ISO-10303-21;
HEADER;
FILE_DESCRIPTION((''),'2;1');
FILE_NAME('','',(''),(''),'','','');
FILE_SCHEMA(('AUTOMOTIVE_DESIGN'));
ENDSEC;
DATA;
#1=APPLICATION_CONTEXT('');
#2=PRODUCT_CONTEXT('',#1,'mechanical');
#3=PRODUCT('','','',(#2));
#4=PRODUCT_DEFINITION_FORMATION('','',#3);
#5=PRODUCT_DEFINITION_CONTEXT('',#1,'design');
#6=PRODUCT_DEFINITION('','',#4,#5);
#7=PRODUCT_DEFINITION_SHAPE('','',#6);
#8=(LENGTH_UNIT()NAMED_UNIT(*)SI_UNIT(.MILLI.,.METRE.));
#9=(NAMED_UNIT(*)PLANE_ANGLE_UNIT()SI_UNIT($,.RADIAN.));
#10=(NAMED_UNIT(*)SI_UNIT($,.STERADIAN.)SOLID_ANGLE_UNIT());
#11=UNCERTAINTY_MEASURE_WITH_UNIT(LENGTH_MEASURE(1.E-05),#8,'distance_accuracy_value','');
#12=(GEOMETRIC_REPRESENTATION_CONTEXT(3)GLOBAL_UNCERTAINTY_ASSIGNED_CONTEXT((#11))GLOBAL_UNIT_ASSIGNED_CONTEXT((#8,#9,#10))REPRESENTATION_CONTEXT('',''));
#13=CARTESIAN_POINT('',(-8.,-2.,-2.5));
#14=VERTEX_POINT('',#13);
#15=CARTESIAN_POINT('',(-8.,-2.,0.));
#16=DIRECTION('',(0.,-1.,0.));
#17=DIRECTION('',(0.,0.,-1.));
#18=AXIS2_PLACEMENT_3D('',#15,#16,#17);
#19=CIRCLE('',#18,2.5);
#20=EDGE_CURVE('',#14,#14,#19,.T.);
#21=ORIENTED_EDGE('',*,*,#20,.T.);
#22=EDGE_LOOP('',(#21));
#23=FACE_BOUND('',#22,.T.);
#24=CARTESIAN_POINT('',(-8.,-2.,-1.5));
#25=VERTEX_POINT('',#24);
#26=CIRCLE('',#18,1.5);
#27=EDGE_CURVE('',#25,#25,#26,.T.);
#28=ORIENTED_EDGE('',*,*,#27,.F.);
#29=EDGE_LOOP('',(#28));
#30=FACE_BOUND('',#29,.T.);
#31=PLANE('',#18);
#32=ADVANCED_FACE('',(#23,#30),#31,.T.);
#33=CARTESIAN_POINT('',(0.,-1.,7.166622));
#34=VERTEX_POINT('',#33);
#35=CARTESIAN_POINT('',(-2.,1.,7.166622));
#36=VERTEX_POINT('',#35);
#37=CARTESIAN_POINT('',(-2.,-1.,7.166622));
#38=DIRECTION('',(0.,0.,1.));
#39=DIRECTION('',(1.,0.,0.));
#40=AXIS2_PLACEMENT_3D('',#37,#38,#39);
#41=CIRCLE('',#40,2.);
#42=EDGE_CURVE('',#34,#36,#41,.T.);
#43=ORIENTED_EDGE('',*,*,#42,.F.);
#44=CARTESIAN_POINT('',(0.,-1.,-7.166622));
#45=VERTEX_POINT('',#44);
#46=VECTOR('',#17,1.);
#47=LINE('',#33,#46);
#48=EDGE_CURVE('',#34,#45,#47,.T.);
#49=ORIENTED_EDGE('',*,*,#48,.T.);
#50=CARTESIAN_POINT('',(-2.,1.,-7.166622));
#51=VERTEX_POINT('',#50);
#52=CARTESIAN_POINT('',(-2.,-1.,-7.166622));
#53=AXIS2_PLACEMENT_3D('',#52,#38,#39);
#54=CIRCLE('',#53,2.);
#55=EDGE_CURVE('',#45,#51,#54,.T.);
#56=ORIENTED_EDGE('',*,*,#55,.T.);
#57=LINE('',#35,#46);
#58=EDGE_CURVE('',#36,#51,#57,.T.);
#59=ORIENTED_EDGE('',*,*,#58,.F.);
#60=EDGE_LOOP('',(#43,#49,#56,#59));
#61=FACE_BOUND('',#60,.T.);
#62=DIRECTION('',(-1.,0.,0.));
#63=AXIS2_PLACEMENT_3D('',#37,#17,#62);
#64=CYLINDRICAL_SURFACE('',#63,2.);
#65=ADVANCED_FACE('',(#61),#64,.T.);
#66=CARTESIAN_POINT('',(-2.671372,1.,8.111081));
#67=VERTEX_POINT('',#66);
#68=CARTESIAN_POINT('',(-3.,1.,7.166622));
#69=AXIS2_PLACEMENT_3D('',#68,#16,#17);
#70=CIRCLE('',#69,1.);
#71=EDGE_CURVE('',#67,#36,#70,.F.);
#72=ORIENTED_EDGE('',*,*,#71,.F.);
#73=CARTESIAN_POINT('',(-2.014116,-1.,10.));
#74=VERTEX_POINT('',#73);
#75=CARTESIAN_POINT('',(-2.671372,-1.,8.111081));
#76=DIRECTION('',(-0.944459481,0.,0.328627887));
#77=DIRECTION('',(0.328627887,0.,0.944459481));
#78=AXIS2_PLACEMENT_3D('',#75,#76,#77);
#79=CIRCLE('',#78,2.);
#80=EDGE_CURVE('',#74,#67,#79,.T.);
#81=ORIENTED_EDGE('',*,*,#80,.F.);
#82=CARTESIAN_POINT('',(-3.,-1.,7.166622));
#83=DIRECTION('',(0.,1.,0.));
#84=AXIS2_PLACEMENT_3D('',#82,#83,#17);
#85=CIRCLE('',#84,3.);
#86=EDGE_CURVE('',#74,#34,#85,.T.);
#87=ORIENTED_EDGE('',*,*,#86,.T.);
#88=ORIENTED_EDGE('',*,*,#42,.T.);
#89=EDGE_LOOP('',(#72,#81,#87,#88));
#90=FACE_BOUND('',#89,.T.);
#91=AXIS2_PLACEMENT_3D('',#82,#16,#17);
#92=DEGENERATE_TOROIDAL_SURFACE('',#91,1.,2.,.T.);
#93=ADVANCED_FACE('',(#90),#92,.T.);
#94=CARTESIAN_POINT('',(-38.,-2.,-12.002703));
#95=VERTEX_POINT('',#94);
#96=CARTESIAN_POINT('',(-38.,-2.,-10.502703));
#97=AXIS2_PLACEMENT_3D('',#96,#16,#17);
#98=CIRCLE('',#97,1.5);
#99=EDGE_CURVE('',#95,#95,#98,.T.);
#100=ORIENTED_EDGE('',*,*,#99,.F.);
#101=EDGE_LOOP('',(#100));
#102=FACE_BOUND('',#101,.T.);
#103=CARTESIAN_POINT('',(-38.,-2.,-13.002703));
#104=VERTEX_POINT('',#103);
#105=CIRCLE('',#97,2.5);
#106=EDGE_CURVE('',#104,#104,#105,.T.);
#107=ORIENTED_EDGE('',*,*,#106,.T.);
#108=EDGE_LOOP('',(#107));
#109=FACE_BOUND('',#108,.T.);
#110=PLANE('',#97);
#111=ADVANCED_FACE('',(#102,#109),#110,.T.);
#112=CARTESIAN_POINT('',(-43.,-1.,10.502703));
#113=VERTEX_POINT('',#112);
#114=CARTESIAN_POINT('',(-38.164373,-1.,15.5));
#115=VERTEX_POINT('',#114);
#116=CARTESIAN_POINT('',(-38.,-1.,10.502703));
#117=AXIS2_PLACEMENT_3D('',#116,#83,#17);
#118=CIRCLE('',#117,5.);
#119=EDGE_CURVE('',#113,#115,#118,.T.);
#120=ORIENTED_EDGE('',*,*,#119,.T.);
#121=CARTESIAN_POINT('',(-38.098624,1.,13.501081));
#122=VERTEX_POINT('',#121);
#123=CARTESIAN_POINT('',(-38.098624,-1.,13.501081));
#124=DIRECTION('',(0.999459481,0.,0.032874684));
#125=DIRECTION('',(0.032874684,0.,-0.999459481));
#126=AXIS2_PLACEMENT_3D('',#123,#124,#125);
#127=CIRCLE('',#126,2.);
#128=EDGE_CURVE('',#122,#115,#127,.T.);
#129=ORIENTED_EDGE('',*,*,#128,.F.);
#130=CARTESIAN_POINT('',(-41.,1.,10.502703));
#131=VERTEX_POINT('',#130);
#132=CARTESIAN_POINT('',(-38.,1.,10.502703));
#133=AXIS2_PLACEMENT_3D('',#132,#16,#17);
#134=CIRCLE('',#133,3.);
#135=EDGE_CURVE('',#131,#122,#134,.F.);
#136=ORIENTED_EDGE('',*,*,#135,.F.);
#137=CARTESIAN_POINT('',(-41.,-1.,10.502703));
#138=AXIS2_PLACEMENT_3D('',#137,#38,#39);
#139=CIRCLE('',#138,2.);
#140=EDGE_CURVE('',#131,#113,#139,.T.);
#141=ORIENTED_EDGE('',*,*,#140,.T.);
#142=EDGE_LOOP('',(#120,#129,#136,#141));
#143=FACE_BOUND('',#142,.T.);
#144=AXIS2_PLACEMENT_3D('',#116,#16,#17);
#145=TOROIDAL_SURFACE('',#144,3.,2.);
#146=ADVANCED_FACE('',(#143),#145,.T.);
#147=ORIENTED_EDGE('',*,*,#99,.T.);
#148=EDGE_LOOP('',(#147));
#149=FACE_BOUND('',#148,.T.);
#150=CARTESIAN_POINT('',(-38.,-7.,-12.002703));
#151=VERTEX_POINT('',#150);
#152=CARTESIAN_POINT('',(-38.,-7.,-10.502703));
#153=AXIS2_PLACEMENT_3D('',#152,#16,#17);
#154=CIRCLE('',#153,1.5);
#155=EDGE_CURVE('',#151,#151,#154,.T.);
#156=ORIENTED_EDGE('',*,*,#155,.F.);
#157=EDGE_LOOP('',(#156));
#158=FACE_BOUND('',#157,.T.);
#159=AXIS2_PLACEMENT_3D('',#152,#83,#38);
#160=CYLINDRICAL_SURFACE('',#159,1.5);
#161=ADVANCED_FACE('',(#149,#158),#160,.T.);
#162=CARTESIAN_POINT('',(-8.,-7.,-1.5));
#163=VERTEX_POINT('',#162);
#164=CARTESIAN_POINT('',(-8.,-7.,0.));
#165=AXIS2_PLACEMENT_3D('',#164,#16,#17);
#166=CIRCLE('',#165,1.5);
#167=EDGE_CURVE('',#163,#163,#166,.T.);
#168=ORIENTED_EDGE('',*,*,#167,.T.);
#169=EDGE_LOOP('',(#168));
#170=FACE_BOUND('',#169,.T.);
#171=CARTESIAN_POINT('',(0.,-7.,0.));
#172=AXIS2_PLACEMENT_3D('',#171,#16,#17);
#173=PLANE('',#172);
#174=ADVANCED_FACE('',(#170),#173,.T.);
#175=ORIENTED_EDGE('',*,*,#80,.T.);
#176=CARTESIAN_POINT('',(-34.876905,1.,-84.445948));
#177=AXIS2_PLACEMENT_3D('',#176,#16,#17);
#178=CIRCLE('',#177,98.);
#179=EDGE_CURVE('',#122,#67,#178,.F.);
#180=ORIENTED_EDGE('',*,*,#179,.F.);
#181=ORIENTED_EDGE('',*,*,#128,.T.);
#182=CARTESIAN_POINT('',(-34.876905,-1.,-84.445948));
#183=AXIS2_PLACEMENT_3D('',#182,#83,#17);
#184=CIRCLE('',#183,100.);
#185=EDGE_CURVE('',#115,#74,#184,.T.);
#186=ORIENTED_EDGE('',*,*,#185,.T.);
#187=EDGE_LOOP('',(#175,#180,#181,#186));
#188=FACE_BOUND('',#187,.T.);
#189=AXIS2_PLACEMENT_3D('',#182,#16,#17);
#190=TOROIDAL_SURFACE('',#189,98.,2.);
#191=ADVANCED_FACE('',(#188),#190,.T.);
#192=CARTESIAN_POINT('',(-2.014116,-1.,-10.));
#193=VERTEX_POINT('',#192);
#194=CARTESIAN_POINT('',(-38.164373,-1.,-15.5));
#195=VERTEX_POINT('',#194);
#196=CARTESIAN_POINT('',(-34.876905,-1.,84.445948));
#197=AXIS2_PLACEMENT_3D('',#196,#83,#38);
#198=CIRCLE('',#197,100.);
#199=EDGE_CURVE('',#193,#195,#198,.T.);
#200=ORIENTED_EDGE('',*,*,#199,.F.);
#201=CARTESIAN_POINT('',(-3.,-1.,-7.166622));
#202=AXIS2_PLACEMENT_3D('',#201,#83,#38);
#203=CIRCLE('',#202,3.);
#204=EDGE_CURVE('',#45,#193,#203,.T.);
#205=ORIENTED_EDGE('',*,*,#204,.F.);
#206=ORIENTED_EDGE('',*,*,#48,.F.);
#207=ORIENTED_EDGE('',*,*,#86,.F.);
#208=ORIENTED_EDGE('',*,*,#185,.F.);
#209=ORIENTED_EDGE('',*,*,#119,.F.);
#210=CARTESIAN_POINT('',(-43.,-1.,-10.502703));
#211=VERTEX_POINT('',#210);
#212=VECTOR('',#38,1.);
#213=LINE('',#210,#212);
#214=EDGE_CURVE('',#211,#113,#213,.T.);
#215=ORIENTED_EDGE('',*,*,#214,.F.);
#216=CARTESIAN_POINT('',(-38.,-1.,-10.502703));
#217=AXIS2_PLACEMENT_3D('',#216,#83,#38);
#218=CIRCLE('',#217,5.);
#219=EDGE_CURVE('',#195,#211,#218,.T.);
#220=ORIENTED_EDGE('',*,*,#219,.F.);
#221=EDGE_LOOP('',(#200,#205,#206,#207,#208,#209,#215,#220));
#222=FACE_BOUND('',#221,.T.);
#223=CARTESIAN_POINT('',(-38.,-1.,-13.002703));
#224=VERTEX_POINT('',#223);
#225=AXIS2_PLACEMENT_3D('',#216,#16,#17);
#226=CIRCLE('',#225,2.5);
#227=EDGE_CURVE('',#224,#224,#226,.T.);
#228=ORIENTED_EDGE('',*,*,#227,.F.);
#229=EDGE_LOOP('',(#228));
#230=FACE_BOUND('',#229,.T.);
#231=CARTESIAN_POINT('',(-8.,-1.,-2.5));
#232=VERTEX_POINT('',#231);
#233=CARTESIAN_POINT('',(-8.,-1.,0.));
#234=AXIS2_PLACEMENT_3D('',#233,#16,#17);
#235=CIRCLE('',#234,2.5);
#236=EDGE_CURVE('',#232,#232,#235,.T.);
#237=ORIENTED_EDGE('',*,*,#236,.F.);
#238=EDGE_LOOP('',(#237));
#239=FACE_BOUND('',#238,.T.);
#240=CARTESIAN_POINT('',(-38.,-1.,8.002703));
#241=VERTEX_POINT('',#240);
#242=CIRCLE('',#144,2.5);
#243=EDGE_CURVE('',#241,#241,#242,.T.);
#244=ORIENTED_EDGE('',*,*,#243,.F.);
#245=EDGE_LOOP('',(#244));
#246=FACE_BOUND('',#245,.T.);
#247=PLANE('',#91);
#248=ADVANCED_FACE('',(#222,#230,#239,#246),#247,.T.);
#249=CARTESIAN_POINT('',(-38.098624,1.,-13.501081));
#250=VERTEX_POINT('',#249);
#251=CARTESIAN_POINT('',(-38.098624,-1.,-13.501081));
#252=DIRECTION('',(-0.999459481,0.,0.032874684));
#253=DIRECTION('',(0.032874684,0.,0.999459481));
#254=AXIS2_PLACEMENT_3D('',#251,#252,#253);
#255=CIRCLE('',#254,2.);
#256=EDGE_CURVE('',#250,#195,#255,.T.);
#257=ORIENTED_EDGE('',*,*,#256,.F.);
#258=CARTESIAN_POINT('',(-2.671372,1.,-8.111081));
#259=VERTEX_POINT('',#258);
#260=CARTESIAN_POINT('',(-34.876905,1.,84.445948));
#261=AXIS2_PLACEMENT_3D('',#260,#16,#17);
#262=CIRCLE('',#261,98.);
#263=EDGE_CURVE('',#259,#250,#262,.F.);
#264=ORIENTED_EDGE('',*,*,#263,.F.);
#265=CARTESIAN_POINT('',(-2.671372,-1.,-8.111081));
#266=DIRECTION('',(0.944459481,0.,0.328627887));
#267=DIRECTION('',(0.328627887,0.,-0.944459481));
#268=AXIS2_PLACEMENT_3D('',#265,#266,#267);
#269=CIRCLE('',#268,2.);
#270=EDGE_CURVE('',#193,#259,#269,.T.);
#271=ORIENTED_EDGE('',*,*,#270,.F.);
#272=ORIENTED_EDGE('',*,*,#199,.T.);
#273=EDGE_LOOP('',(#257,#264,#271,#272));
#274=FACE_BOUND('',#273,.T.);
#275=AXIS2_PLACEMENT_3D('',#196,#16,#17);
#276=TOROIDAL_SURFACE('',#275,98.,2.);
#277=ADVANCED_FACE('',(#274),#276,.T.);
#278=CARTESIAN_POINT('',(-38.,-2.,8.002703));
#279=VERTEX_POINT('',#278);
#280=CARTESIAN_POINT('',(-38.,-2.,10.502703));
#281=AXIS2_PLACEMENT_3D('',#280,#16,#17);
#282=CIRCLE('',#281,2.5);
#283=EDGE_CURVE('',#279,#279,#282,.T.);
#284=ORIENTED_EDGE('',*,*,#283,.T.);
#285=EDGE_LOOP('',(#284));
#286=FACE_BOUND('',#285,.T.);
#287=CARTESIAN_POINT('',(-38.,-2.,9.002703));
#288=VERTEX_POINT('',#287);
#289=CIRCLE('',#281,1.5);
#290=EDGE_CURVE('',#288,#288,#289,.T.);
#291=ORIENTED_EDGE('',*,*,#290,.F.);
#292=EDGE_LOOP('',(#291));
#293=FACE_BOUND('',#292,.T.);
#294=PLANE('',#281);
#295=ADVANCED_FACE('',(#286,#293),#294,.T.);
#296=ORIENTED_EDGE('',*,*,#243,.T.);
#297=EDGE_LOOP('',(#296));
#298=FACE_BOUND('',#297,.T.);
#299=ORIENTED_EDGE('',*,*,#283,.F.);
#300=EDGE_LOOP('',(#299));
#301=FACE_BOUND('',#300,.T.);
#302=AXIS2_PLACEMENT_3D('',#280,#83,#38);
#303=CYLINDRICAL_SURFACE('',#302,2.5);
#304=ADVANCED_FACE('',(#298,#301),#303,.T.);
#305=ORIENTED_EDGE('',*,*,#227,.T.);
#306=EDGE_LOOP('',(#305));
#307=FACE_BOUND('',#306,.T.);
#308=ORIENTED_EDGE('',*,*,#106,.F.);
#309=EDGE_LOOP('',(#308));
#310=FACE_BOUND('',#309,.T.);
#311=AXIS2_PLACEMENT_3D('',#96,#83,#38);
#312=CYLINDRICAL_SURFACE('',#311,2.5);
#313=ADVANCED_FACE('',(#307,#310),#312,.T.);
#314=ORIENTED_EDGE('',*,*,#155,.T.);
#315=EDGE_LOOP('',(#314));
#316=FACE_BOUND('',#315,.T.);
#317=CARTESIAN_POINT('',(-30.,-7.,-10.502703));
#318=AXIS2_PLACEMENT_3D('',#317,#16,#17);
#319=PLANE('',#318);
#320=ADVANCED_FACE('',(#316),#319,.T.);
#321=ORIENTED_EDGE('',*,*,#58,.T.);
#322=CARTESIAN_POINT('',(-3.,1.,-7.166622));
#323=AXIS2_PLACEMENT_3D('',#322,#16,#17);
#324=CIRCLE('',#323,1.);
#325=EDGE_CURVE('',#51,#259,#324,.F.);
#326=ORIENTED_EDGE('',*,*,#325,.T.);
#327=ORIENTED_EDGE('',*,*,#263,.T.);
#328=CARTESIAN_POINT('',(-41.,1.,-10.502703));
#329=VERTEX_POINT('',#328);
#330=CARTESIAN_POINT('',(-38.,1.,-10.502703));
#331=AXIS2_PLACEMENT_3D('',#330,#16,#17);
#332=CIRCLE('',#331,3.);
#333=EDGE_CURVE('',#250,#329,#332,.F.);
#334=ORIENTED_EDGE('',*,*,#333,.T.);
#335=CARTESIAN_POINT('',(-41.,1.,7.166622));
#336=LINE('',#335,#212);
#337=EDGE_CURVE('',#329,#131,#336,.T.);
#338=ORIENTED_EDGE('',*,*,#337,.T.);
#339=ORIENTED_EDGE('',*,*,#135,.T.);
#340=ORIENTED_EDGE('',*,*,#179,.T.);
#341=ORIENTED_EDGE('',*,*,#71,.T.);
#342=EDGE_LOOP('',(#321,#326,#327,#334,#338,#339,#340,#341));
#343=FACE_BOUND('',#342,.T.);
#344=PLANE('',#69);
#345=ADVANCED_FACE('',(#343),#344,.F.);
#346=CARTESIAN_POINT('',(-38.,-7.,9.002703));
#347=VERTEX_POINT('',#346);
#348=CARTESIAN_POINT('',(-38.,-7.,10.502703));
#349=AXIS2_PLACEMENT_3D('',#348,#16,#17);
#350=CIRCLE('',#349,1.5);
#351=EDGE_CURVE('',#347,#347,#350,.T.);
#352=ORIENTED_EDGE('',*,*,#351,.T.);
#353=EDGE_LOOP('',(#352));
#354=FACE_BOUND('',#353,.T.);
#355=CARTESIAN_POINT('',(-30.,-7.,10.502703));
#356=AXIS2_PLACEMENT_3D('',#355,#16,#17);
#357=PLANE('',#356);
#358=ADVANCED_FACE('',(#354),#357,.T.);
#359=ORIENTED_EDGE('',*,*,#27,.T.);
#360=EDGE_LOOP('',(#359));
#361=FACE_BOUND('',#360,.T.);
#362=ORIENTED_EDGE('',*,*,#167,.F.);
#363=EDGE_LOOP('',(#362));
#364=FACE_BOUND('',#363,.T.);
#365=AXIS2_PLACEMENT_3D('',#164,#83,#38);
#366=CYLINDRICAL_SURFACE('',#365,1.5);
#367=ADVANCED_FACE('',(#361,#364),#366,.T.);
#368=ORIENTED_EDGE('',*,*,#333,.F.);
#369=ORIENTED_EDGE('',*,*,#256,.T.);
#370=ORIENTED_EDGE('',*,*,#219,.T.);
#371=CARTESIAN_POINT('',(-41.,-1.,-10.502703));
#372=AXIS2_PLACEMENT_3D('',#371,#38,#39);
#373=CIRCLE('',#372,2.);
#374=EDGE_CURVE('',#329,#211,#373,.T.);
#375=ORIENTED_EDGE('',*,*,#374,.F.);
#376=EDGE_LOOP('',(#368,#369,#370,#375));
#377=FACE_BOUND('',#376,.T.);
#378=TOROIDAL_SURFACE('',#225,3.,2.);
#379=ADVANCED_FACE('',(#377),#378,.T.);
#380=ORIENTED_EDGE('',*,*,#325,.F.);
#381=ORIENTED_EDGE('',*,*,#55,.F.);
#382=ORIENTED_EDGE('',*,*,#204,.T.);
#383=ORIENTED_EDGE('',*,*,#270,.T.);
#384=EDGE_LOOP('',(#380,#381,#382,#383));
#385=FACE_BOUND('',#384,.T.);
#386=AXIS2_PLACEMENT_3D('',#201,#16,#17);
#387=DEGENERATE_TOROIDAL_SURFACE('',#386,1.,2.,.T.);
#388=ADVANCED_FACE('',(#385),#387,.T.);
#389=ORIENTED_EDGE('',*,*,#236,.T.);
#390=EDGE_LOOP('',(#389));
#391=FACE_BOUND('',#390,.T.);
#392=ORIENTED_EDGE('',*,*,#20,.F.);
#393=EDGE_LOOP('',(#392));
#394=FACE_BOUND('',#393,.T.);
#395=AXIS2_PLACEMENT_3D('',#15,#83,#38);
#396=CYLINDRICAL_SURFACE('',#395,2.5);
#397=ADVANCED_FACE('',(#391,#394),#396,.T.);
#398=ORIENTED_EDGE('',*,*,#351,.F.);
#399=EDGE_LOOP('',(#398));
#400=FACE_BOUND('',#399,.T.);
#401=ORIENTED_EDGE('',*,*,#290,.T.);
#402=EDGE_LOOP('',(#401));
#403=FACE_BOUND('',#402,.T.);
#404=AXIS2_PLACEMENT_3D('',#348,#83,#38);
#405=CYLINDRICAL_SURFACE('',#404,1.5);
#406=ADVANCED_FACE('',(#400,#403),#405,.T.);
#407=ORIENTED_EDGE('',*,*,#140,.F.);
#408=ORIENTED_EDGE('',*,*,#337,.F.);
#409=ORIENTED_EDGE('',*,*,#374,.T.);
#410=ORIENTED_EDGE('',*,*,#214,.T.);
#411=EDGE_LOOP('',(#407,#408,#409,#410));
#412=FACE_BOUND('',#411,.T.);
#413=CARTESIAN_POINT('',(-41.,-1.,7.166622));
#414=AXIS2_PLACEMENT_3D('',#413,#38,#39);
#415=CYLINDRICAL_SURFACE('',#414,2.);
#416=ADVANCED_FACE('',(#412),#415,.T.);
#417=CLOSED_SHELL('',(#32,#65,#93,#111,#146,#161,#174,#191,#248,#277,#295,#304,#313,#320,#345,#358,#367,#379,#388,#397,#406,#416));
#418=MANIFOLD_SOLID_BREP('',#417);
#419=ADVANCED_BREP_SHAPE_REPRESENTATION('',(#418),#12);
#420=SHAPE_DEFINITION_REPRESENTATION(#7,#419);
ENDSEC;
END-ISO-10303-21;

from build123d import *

# Parameters (mm, degrees)
BOSS_EXTRUDE1_DEPTH = 1
SKETCH2_R           = 2.5
SKETCH2_R_2         = 1.5
BOSS_EXTRUDE2_DEPTH = 1
SKETCH2_2_R         = 1.5
BOSS_EXTRUDE3_DEPTH = 6
FILLET1_R           = 2


with BuildPart() as part:
    # Sketch1 → Boss-Extrude1 (new, symmetric)
    with BuildSketch(Plane(origin=(0, 0, 0), x_dir=(1, 0, 0), z_dir=(0, 1, 0))):
        with BuildLine():
            Line((0, -7.166621556), (0, 7.166621556))
            ThreePointArc((0, 7.166621556), (-0.554836306, 8.90477417), (-2.01411634, 10))
            ThreePointArc((-2.01411634, 10), (-19.83571516, 14.416393561), (-38.164373421, 15.5))
            ThreePointArc((-38.164373421, 15.5), (-41.593178753, 13.979636076), (-43, 10.502702593))
            Line((-43, 10.502702593), (-43, -10.502702593))
            ThreePointArc((-43, -10.502702593), (-41.593178753, -13.979636076), (-38.164373421, -15.5))
            ThreePointArc((-38.164373421, -15.5), (-19.83571516, -14.416393561), (-2.01411634, -10))
            ThreePointArc((-2.01411634, -10), (-0.554836306, -8.90477417), (0, -7.166621556))
        make_face()
    extrude(amount=BOSS_EXTRUDE1_DEPTH, both=True)

    # Sketch2 → Boss-Extrude2 (add)
    with BuildSketch(Plane.XZ.offset(1)):
        with Locations(Location((-8, 0, 0), (0, 0, 270))):
            Circle(SKETCH2_R)
        with Locations(Location((-8, 0, 0), (0, 0, 270))):
            Circle(SKETCH2_R_2, mode=Mode.SUBTRACT)
    boss_extrude2 = extrude(amount=BOSS_EXTRUDE2_DEPTH)

    # Sketch2<2> → Boss-Extrude3 (add)
    with BuildSketch(Plane.XZ.offset(1)):
        with Locations(Location((-8, 0, 0), (0, 0, 270))):
            Circle(SKETCH2_2_R)
    boss_extrude3 = extrude(amount=BOSS_EXTRUDE3_DEPTH)

    # Sketch-Pattern1: Boss-Extrude2, Boss-Extrude3 at 2 more places
    with Locations((-30, 0, 10.502703), (-30, 0, -10.502703)):
        add(boss_extrude2)
        add(boss_extrude3)

    # Fillet1
    fillet1_edges = [part.edges().sort_by_distance(p)[0] for p in [
        (-19.83571516, 1, 14.416393561),
        (-41.593178753, 1, 13.979636076),
        (-43, 1, 0),
        (-41.593178753, 1, -13.979636076),
        (-0.554836306, 1, -8.90477417),
        (0, 1, 0),
        (-0.554836306, 1, 8.90477417),
        (-19.83571516, 1, -14.416393561),
    ]]
    fillet(fillet1_edges, radius=FILLET1_R - 0.0001)  # a hair under: the kernel refuses the full size


solid = part.part
